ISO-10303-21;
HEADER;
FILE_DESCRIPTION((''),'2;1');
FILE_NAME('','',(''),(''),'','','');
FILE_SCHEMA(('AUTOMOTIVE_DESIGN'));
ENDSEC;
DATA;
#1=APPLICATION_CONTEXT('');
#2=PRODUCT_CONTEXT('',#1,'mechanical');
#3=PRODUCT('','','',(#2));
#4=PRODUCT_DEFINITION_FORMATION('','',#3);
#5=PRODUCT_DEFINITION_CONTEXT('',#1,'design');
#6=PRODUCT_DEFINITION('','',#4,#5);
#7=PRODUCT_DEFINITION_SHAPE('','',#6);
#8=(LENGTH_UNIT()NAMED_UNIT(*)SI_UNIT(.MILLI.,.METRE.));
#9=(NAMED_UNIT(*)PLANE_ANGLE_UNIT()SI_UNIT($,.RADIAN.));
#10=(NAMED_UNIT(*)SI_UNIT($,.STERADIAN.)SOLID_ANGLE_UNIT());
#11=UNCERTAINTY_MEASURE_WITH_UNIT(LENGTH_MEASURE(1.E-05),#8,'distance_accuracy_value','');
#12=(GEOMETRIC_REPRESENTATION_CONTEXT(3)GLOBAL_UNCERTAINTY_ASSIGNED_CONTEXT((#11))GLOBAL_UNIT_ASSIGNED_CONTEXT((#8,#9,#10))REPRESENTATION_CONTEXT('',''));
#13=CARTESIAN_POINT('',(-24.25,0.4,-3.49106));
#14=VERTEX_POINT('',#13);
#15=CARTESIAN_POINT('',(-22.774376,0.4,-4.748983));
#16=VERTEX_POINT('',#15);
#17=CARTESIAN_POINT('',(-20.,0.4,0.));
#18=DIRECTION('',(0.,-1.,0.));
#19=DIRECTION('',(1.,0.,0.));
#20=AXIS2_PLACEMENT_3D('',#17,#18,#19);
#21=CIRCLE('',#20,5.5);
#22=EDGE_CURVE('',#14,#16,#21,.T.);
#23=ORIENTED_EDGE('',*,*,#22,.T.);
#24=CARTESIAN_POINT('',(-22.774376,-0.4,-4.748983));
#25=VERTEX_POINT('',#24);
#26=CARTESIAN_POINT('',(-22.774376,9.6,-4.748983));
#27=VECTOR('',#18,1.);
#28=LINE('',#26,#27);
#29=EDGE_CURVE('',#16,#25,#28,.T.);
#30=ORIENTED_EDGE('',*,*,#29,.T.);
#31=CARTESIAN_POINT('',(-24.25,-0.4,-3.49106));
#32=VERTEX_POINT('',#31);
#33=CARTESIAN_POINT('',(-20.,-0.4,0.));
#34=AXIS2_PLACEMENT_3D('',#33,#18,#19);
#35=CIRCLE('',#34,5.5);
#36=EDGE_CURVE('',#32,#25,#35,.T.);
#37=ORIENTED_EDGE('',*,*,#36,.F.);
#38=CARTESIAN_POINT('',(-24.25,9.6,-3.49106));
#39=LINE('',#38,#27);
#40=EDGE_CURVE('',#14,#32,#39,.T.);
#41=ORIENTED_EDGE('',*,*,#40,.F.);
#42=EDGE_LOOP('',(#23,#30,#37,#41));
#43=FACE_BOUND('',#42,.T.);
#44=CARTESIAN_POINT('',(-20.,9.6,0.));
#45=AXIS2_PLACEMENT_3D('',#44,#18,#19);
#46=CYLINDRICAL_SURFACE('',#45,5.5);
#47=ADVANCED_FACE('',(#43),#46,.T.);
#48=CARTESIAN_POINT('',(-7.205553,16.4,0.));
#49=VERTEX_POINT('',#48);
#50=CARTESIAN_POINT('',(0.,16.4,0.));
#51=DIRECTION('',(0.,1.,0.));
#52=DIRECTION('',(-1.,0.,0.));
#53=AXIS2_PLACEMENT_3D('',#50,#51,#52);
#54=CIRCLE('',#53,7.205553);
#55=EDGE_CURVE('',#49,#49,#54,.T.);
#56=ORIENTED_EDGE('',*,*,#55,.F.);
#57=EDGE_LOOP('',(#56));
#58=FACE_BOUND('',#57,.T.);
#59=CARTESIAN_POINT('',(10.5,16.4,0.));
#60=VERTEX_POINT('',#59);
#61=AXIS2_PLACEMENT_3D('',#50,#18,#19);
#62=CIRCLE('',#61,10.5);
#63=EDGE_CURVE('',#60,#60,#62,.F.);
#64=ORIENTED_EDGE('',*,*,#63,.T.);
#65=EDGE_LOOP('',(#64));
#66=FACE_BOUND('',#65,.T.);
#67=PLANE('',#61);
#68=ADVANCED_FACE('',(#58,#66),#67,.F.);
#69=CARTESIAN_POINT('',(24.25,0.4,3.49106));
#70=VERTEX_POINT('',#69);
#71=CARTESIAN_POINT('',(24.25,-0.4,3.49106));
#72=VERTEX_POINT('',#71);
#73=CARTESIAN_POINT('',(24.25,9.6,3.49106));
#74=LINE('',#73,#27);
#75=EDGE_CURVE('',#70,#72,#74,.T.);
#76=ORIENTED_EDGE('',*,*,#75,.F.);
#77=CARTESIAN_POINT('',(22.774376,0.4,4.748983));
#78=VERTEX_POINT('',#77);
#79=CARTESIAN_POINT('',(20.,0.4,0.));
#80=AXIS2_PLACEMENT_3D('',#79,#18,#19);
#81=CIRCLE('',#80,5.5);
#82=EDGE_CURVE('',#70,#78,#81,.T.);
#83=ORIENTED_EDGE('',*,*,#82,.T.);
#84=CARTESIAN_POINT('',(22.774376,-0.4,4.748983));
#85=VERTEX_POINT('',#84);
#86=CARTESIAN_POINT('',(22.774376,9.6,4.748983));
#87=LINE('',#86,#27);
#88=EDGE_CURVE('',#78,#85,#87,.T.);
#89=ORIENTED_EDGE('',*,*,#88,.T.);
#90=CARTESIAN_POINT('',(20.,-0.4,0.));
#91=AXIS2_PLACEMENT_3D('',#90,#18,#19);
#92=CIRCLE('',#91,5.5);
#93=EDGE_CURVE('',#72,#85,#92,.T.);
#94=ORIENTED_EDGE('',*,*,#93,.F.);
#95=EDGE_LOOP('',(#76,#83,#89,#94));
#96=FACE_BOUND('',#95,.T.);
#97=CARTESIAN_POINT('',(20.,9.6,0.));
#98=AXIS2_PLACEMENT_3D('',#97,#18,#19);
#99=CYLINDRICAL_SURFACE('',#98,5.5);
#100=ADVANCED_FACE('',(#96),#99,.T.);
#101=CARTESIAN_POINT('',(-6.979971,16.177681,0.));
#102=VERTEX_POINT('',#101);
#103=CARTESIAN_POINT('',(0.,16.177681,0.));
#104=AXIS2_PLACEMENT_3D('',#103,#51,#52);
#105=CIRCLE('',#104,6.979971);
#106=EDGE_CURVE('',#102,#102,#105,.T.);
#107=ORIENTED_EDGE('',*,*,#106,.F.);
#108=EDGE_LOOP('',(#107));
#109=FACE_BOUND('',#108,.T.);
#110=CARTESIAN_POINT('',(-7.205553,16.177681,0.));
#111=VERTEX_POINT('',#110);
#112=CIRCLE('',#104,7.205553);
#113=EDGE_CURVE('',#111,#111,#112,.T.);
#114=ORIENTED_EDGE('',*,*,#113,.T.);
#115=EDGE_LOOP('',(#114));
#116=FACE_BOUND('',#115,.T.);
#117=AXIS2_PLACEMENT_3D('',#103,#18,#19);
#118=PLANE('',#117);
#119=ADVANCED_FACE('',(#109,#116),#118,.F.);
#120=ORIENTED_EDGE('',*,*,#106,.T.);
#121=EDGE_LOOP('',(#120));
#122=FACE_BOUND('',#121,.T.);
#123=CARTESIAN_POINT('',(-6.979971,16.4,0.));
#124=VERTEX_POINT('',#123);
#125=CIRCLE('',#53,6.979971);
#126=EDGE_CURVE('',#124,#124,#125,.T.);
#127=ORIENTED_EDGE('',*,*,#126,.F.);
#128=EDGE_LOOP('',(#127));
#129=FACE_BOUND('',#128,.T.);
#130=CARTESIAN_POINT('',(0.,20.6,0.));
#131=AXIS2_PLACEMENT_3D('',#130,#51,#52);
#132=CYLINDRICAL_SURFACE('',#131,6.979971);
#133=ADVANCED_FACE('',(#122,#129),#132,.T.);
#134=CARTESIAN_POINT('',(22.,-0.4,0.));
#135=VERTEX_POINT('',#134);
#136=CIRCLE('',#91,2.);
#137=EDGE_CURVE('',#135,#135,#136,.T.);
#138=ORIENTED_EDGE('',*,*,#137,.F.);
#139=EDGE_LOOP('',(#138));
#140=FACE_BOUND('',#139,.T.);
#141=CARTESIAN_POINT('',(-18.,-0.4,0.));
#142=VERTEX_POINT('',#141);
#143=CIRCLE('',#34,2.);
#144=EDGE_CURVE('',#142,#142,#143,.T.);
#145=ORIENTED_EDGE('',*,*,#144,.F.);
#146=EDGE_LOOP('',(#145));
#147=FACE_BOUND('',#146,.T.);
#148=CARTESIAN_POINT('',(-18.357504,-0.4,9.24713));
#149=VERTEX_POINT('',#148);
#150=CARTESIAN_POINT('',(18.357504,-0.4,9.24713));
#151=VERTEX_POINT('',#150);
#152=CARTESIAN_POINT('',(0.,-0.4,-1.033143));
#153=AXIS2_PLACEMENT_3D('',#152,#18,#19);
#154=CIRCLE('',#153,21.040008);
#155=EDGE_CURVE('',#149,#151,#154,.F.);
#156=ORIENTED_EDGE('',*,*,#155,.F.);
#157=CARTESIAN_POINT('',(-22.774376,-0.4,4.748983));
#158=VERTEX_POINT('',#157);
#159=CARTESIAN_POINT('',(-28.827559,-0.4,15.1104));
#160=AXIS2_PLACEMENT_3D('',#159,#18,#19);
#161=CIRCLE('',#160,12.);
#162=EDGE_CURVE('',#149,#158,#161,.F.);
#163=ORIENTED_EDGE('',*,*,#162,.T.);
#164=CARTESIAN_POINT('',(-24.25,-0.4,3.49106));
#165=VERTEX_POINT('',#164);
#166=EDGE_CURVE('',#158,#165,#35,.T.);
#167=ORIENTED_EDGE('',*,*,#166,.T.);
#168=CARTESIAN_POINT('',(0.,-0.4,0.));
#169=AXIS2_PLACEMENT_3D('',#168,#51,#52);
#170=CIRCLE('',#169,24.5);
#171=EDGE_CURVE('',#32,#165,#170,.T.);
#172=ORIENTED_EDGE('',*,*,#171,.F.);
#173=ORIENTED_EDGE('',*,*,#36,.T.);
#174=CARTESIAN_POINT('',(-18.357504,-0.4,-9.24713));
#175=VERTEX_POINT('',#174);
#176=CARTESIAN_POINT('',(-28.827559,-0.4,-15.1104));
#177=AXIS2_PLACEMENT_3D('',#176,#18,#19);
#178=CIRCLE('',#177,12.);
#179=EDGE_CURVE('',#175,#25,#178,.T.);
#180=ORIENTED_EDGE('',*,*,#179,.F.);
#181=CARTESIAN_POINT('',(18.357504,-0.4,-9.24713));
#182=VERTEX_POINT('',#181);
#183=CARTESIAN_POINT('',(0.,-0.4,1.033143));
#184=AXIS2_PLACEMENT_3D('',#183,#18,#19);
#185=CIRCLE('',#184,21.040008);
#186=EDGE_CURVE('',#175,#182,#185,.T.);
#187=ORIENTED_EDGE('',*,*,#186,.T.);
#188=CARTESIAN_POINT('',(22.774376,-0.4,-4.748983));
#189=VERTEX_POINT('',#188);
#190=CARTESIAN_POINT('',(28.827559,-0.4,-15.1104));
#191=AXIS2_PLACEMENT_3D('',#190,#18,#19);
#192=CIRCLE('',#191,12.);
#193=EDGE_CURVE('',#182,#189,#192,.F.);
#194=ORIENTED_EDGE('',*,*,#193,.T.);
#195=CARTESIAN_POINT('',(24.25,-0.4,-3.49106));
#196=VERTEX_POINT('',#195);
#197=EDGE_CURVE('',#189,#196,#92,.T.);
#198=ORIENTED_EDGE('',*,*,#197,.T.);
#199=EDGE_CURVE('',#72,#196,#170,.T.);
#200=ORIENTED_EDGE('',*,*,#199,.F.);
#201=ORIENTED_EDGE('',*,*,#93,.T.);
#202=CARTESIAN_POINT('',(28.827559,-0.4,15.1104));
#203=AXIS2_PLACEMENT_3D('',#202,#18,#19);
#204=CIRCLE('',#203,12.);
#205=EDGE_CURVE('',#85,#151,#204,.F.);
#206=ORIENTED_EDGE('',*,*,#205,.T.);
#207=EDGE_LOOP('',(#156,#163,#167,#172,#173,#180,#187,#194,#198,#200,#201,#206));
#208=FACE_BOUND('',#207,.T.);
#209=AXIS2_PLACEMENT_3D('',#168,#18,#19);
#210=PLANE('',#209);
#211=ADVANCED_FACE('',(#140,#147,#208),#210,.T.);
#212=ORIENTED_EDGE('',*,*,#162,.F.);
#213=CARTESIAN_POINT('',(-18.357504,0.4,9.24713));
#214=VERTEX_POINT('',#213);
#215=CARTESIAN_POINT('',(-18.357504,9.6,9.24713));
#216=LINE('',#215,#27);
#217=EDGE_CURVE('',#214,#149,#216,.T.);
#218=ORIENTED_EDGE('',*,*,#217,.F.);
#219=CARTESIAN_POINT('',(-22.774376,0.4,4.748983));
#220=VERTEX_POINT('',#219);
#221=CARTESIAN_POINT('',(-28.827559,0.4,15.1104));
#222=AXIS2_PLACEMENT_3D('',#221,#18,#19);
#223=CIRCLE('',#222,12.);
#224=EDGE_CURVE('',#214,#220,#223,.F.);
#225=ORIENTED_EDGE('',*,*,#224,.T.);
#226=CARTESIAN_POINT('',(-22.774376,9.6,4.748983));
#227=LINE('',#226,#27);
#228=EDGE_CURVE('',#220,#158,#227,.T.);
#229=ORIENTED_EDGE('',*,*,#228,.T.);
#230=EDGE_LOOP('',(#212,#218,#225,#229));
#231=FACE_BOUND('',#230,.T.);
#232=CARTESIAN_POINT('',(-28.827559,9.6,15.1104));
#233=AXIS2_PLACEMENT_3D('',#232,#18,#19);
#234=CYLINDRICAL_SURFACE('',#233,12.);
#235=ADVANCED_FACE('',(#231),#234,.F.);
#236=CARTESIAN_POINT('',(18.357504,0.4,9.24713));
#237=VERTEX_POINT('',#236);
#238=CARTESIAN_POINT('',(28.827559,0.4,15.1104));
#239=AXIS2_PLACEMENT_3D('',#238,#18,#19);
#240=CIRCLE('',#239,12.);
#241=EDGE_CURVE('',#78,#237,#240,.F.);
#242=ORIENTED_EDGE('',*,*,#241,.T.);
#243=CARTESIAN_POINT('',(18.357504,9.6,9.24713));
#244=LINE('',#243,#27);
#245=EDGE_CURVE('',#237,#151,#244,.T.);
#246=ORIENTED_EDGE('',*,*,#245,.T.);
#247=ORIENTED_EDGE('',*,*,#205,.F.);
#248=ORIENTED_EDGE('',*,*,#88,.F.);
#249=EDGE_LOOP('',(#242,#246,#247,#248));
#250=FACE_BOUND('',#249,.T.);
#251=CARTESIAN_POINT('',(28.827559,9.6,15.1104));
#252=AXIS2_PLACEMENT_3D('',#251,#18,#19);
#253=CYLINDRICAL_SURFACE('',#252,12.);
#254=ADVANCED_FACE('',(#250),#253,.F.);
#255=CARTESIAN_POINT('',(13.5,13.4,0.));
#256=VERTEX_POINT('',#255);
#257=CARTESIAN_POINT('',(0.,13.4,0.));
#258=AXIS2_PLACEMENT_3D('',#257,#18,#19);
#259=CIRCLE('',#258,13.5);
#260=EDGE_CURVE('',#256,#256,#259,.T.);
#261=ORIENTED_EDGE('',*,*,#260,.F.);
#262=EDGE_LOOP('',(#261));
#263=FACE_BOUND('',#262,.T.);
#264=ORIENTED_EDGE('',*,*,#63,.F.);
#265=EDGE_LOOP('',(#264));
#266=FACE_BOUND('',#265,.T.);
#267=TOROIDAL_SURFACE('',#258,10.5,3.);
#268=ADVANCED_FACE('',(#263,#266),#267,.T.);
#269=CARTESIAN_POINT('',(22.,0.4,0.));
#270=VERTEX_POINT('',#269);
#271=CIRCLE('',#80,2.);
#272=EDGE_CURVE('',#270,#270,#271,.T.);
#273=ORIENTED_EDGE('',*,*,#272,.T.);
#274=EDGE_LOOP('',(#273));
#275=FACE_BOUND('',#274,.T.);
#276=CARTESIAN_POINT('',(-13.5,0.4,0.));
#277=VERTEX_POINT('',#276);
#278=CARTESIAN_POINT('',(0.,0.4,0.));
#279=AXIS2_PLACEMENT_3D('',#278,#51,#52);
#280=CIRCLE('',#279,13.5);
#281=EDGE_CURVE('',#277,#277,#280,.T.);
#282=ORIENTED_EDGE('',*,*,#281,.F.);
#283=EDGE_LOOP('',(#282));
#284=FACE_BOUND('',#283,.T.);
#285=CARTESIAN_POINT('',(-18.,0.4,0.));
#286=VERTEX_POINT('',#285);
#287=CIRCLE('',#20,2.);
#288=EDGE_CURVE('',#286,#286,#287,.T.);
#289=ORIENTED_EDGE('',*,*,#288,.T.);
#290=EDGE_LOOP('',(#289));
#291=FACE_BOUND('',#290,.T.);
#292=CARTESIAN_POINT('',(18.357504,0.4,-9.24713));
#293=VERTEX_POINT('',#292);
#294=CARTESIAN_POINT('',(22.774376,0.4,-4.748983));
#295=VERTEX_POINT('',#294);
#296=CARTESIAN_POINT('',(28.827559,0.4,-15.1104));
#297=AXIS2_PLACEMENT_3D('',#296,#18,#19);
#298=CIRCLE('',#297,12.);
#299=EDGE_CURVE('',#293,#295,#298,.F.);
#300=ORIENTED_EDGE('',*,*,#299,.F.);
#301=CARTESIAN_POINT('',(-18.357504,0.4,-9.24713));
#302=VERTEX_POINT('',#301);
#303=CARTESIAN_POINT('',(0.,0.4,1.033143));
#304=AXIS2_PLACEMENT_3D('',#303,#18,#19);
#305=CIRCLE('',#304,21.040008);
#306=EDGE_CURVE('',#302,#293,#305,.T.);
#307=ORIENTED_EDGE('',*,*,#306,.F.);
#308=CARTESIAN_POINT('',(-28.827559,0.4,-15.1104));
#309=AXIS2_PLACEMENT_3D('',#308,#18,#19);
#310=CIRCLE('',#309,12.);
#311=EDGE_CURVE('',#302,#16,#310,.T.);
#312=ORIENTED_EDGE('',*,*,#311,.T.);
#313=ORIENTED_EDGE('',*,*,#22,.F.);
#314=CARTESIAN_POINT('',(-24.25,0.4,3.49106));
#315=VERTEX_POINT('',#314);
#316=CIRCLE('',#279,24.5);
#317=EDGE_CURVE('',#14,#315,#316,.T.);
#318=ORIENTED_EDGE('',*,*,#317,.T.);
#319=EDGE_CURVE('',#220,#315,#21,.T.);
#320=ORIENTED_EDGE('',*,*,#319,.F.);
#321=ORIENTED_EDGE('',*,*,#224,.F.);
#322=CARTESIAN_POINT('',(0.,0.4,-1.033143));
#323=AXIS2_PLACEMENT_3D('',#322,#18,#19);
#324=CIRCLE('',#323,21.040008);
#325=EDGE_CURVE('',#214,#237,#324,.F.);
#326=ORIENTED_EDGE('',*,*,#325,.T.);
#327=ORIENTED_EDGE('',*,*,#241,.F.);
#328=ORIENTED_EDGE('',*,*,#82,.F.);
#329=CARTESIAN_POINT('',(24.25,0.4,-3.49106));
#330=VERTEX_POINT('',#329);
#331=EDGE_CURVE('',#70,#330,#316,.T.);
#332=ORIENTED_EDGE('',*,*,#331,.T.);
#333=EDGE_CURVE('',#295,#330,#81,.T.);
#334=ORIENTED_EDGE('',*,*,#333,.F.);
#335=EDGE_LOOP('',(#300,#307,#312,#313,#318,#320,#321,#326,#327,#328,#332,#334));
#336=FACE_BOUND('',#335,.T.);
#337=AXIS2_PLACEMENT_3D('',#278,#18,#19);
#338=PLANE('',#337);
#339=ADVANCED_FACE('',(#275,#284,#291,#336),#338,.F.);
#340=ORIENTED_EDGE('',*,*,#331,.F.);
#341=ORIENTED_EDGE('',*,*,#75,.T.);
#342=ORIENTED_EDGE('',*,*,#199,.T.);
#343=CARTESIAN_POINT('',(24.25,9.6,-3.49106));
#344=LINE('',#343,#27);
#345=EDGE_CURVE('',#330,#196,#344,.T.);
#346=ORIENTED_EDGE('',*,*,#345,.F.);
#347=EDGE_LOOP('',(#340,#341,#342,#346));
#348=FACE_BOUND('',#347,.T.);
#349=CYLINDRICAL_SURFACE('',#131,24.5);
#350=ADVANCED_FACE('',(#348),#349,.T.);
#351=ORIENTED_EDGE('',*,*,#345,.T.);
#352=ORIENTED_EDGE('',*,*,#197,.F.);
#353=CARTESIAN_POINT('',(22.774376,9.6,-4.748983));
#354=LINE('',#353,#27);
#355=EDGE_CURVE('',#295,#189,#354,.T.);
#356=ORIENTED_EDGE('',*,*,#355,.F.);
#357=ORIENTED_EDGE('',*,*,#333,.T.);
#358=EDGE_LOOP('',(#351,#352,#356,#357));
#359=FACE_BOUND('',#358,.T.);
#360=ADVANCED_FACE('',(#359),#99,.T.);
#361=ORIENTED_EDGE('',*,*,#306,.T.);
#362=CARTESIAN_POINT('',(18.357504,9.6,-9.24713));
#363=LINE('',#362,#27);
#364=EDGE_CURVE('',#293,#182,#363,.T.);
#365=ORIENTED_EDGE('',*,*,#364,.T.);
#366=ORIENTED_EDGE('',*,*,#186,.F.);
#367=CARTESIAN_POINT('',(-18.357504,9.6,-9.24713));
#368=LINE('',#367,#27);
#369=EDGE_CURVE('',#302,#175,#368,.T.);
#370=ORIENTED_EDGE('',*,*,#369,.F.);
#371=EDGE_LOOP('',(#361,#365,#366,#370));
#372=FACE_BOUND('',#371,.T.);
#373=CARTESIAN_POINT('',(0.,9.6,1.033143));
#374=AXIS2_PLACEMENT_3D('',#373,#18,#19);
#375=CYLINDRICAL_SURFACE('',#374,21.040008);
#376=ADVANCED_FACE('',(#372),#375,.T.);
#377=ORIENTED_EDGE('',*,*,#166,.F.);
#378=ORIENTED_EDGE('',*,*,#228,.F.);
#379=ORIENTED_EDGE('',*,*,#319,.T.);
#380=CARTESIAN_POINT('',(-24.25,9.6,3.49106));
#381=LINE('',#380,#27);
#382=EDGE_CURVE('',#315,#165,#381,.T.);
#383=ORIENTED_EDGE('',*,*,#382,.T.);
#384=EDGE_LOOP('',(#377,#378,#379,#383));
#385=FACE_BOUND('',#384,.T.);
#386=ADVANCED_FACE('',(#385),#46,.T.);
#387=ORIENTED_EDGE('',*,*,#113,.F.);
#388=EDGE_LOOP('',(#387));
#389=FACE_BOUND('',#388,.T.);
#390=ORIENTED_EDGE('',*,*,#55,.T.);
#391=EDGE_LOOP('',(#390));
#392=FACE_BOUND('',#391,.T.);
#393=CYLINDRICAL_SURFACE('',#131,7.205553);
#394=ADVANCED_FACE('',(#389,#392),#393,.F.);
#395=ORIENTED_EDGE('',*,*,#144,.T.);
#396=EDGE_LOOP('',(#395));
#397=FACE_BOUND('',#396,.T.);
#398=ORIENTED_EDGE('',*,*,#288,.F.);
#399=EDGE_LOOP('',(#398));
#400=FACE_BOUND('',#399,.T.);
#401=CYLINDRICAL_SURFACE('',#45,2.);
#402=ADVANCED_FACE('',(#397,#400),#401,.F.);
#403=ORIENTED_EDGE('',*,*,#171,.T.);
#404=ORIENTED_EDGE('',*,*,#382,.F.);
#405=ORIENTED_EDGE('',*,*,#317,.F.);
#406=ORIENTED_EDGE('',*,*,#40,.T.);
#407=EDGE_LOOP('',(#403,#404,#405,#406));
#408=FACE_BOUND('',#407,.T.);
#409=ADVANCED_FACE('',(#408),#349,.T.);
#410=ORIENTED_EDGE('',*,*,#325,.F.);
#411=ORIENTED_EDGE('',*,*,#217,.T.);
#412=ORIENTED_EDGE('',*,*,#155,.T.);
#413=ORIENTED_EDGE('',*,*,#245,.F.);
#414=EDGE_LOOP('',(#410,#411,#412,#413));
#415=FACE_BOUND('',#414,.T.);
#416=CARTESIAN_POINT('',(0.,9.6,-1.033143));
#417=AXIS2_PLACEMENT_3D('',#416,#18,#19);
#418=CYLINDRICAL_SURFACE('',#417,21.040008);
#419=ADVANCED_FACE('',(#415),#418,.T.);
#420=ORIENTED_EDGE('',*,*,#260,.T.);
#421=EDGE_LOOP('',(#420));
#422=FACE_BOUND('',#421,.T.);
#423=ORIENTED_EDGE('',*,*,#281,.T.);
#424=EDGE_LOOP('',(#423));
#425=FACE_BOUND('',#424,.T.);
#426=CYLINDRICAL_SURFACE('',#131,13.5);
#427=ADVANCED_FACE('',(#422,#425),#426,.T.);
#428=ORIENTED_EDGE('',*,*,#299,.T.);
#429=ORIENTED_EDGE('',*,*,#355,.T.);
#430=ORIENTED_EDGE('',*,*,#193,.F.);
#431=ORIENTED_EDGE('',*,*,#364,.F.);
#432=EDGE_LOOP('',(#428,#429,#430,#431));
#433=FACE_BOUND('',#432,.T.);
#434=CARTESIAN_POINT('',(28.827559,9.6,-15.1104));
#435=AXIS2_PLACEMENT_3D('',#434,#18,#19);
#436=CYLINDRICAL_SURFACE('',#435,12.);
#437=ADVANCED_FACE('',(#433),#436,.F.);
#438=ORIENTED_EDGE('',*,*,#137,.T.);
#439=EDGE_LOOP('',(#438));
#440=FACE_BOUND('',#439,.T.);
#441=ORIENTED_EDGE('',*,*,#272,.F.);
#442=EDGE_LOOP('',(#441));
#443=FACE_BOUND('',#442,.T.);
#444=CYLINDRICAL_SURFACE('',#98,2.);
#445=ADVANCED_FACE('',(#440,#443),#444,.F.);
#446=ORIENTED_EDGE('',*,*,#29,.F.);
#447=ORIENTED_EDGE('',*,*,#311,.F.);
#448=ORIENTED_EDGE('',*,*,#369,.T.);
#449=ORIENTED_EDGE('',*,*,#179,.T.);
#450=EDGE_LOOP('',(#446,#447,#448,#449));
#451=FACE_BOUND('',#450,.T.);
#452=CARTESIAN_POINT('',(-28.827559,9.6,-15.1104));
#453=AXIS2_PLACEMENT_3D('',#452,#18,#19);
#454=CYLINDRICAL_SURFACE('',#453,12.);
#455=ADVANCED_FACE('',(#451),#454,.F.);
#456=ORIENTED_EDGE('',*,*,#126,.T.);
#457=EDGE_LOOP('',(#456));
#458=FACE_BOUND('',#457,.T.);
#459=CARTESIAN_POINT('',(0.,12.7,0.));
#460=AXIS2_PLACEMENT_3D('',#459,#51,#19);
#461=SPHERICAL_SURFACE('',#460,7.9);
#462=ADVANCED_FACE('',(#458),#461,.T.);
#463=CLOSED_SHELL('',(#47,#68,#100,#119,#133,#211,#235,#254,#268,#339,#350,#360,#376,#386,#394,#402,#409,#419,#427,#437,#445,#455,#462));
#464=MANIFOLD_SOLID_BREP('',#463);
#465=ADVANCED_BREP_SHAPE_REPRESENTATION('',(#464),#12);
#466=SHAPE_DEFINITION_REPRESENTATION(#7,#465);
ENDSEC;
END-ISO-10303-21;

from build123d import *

# Parameters (mm, degrees)
FILLET_1_R          = 3
SKETCH_2_R          = 2
CUT_EXTRUDE_1_DEPTH = 10


with BuildPart() as part:
    # 草图1 → 旋转1 (revolve)
    with BuildSketch(Plane.XY):
        Polygon((0, -0.4), (0, 16.4), (-6.979971347, 16.4), (-6.979971347, 16.177681197), (-7.205553414, 16.177681197), (-7.205553414, 16.4), (-13.5, 16.4), (-13.5, 0.4), (-24.5, 0.4), (-24.5, -0.4), align=None)
    revolve(axis=Axis((0, 20.6, 0), (0, -1, 0)))

    # 草图1<3> → 旋转2 (revolve)
    with BuildSketch(Plane.XY):
        with BuildLine():
            Line((-6.979971347, 16.4), (0, 16.4))
            Line((0, 16.4), (0, 20.6))
            ThreePointArc((0, 20.6), (-4.073082371, 19.4690472), (-6.979971347, 16.4))
        make_face()
    revolve(axis=Axis((0, 20.6, 0), (0, -1, 0)))

    # 圆角1
    fillet_1_edges = [part.edges().sort_by_distance(p)[0] for p in [
        (13.5, 16.4, 0),
    ]]
    fillet(fillet_1_edges, radius=FILLET_1_R)

    # 草图2 → 切除-拉伸1 (cut)
    with BuildSketch(Plane.XZ.offset(0.4)):
        with Locations((-20, 0)):
            Circle(SKETCH_2_R)
        with Locations((20, 0)):
            Circle(SKETCH_2_R)
        with BuildLine():
            ThreePointArc((-24.25, -3.491060011), (0, -24.5), (24.25, -3.491060011))
            ThreePointArc((24.25, -3.491060011), (23.568060584, -4.185563721), (22.77437579, -4.748982941))
            ThreePointArc((22.77437579, -4.748982941), (20.265276607, -6.702825437), (18.357504114, -9.24712953))
            ThreePointArc((18.357504114, -9.24712953), (0, -20.006865782), (-18.357504114, -9.24712953))
            ThreePointArc((-18.357504114, -9.24712953), (-20.265276607, -6.702825437), (-22.77437579, -4.748982941))
            ThreePointArc((-22.77437579, -4.748982941), (-23.568060584, -4.185563721), (-24.25, -3.491060011))
        make_face()
        with BuildLine():
            ThreePointArc((22.77437579, 4.748982941), (23.568060584, 4.185563721), (24.25, 3.491060011))
            ThreePointArc((24.25, 3.491060011), (0, 24.5), (-24.25, 3.491060011))
            ThreePointArc((-24.25, 3.491060011), (-23.568060584, 4.185563721), (-22.77437579, 4.748982941))
            ThreePointArc((-22.77437579, 4.748982941), (-20.265276607, 6.702825437), (-18.357504114, 9.24712953))
            ThreePointArc((-18.357504114, 9.24712953), (0, 20.006865782), (18.357504114, 9.24712953))
            ThreePointArc((18.357504114, 9.24712953), (20.265276607, 6.702825437), (22.77437579, 4.748982941))
        make_face()
    extrude(amount=-CUT_EXTRUDE_1_DEPTH, mode=Mode.SUBTRACT)


solid = part.part
